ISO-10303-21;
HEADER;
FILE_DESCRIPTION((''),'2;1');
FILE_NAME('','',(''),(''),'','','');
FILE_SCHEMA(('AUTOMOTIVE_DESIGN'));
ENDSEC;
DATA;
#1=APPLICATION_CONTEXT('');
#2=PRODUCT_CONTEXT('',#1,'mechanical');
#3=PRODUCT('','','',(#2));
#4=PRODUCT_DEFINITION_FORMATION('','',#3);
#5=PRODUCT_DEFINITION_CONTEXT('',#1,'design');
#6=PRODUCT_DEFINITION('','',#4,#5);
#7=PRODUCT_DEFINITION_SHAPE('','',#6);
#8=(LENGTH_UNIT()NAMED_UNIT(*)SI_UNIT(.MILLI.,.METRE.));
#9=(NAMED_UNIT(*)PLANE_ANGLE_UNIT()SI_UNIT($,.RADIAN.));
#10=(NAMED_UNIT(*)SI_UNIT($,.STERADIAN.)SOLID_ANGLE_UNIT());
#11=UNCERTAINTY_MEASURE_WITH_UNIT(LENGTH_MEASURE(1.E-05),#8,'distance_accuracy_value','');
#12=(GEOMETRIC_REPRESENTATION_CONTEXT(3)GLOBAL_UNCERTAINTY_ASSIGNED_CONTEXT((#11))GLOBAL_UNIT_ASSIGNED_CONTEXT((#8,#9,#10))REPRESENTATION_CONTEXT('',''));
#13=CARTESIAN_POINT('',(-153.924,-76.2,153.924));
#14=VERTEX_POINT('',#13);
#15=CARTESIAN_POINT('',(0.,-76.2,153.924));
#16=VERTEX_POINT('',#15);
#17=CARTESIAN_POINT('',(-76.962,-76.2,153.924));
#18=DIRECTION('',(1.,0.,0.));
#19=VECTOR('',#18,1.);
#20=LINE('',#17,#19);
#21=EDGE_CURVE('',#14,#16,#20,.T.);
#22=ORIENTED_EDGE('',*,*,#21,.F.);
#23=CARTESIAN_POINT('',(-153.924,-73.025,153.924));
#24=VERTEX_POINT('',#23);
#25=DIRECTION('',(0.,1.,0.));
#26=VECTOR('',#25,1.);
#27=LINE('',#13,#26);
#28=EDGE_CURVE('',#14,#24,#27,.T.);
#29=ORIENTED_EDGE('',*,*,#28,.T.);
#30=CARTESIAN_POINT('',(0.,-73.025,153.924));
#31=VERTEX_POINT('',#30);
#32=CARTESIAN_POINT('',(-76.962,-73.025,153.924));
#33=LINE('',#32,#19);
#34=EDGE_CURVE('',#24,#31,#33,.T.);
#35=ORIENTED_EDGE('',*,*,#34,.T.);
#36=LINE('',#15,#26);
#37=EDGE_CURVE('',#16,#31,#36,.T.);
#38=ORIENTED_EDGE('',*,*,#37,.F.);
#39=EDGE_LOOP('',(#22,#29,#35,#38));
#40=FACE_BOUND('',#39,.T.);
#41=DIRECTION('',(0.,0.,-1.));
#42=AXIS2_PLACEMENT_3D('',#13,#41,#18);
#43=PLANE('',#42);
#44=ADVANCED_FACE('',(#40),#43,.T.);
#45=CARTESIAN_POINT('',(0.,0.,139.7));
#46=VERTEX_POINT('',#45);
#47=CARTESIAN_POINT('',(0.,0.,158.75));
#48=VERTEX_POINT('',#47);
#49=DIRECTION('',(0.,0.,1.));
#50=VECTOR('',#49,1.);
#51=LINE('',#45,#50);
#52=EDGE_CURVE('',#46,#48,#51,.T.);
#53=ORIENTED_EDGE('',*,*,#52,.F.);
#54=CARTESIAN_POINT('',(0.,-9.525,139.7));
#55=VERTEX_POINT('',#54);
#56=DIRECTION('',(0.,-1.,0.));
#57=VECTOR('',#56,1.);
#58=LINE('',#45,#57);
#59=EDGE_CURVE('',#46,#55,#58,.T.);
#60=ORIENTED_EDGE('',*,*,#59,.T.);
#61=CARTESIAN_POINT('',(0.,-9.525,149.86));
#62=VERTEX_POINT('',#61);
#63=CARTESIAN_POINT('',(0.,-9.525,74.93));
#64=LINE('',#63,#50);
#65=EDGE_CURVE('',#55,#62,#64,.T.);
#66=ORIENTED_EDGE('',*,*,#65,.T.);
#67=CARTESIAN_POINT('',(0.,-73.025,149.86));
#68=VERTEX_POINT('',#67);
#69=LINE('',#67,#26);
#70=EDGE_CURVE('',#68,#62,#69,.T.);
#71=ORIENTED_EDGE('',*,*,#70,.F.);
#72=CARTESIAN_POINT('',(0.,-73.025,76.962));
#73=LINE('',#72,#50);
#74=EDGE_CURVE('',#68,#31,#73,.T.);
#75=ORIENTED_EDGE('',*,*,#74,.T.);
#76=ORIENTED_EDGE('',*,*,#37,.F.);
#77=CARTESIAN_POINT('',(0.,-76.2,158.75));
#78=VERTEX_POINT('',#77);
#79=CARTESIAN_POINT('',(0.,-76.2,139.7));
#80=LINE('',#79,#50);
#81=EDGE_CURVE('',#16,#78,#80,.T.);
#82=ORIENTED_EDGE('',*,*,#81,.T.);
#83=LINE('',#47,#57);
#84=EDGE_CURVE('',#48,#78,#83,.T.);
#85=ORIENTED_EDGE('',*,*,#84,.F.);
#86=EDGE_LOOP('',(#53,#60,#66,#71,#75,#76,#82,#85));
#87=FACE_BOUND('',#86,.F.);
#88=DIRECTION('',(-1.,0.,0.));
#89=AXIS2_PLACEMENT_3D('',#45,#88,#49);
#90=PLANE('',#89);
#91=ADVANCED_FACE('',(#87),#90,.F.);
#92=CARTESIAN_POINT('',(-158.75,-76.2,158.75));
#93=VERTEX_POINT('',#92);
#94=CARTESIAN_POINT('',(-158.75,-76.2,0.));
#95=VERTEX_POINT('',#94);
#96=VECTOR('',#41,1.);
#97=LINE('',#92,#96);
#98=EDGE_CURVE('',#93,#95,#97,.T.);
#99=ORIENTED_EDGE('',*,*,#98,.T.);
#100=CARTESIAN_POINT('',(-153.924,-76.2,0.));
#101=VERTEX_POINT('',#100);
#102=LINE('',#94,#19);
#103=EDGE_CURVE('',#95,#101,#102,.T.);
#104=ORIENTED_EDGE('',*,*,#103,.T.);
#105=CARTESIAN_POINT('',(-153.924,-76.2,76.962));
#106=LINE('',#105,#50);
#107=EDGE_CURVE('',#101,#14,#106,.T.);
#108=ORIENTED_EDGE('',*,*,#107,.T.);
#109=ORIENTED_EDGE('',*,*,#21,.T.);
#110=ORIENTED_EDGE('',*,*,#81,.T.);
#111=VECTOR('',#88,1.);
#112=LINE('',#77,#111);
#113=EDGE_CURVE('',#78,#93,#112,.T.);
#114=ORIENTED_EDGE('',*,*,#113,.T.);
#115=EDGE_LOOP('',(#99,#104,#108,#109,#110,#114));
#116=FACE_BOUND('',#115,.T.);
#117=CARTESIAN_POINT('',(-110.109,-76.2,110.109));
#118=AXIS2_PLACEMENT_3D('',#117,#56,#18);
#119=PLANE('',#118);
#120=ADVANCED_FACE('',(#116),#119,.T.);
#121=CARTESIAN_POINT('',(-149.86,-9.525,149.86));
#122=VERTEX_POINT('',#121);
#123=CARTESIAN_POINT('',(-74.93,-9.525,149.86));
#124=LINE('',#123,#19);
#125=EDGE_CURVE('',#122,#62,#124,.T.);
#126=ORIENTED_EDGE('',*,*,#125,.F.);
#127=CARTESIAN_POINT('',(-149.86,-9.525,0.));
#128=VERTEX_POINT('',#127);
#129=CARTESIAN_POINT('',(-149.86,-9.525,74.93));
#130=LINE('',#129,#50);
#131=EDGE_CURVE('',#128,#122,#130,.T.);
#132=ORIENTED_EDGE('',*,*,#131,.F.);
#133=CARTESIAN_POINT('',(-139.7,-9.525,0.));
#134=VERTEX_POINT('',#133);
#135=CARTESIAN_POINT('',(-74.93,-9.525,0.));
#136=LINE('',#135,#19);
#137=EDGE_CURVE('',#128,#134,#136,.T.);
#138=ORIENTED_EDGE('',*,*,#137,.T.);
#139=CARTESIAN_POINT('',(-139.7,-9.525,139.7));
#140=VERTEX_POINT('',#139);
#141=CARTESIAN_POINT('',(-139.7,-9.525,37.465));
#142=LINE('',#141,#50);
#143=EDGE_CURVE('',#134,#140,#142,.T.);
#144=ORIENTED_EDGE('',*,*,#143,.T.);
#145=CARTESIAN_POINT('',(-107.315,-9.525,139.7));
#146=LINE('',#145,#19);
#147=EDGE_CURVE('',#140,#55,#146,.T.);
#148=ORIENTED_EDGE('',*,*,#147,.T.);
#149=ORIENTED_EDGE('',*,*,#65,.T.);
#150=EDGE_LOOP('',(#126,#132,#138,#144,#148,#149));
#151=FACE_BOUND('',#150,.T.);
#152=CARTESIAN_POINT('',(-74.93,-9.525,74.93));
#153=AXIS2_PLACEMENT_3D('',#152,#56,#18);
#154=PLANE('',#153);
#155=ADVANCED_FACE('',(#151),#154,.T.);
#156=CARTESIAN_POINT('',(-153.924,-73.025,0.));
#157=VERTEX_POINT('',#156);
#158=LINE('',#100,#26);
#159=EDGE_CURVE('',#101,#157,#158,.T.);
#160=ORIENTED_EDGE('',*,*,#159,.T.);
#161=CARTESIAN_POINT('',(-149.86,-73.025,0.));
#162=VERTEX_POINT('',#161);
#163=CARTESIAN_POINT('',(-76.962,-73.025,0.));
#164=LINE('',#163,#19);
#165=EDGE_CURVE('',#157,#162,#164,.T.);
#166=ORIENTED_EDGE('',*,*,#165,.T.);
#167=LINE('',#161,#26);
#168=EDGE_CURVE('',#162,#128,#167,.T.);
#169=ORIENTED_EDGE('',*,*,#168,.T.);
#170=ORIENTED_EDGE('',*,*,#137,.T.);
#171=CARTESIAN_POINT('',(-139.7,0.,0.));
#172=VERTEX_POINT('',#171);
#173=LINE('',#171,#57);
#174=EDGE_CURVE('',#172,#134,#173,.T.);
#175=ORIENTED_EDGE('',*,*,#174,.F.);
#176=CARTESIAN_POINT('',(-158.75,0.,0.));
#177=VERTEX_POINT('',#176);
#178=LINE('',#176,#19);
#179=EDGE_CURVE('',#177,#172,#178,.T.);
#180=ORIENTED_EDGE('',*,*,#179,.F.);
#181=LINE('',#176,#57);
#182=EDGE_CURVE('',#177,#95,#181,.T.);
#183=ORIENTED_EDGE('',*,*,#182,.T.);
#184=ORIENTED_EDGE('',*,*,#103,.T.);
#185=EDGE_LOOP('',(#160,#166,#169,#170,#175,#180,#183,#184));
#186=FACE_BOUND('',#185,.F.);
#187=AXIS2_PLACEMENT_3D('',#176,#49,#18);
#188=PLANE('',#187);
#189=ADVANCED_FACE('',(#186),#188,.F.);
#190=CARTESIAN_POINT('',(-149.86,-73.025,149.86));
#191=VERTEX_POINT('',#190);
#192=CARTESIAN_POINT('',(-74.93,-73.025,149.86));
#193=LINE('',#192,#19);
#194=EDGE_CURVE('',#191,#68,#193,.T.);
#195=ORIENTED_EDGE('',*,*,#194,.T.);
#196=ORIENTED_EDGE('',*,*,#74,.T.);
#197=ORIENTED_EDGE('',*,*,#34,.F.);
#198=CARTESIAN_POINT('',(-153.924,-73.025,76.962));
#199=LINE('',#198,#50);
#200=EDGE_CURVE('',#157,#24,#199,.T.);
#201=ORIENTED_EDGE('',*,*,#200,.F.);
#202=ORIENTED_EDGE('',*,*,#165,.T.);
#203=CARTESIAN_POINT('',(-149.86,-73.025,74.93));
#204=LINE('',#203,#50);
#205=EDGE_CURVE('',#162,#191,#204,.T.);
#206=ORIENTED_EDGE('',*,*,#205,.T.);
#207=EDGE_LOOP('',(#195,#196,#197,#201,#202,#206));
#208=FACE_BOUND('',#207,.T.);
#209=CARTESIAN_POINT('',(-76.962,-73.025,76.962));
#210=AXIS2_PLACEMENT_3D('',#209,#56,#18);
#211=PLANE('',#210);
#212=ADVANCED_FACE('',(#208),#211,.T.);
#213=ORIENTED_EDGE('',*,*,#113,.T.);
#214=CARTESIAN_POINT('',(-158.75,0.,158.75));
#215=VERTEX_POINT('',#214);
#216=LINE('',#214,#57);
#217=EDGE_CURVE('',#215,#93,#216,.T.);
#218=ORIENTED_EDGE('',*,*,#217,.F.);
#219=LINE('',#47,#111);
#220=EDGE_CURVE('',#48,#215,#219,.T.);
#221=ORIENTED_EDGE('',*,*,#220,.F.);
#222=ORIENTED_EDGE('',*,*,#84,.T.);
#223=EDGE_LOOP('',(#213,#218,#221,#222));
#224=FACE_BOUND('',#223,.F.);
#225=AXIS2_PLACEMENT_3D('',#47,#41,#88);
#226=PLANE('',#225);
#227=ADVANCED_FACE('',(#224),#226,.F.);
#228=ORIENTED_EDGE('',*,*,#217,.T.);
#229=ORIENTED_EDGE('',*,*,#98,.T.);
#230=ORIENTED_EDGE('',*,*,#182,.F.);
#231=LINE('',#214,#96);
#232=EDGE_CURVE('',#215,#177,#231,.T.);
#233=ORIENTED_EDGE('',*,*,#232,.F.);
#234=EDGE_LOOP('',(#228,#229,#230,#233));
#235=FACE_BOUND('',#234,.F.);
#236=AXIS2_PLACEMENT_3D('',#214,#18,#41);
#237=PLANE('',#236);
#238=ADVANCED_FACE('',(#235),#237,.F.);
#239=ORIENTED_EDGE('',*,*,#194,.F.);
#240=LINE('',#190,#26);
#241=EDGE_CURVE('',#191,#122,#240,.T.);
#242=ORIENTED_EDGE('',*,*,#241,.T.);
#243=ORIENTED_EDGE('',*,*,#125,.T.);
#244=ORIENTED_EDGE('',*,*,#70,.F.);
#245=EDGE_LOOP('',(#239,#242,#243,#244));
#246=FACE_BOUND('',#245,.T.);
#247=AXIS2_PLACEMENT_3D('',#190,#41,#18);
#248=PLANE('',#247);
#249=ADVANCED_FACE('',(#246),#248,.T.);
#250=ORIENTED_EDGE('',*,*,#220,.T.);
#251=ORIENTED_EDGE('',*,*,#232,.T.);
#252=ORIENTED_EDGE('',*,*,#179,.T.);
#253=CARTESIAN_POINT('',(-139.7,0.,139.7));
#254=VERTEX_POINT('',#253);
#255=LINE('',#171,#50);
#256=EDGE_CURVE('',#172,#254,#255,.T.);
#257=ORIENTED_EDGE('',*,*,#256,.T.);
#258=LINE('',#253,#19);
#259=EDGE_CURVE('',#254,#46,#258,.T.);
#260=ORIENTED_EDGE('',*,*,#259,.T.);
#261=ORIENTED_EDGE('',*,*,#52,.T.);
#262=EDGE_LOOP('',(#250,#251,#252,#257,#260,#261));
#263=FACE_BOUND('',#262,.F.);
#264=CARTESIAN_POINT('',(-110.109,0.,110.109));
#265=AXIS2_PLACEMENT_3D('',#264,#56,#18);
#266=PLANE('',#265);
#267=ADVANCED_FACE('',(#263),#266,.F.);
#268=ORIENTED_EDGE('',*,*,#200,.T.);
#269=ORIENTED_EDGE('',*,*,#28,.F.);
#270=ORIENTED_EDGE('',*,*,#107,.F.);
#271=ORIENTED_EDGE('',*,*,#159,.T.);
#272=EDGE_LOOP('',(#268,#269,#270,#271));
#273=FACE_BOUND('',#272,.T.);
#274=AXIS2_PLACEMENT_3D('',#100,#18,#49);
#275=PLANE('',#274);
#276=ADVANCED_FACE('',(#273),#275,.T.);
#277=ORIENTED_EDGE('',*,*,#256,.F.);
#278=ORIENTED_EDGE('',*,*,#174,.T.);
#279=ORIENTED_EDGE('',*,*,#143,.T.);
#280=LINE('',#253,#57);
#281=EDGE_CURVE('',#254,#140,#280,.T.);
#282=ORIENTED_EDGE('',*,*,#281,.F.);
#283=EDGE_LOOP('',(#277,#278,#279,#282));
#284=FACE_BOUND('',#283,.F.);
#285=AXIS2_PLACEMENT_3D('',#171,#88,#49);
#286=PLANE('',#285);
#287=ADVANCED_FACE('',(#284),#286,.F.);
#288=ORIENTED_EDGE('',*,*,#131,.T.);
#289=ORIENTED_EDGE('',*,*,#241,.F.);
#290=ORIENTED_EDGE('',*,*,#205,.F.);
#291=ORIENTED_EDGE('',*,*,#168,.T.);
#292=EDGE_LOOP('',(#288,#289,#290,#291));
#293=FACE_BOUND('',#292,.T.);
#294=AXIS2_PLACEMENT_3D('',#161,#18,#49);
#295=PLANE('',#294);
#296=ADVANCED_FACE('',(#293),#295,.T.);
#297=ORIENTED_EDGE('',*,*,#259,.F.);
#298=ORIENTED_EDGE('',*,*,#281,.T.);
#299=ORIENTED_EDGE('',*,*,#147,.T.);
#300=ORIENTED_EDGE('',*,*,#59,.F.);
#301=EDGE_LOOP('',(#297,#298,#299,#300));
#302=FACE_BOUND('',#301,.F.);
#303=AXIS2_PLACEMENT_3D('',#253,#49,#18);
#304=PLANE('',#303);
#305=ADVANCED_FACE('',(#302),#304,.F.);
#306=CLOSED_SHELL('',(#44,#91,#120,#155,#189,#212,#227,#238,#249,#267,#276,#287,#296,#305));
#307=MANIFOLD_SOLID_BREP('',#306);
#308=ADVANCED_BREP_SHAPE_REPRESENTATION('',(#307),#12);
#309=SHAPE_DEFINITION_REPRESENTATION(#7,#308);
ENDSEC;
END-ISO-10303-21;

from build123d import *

# Parameters (mm, degrees)
F1_DEPTH = 76.2
F2_W     = 153.924
F2_H     = 153.924
F3_DEPTH = 3.175
F4_W     = 149.86
F4_H     = 149.86
F5_DEPTH = 63.5


# Not quite as in the source:
# - a feature names something its author has since deleted; it is built from what else it names


with BuildPart() as f1:
    # F0 (on Front) → F1 (new body)
    with BuildSketch(Plane.XZ):
        Polygon((0, 139.7), (0, 158.75), (-158.75, 158.75), (-158.75, 0), (-139.7, 0), (-139.7, 139.7), align=None)
    extrude(amount=F1_DEPTH)

    # F2 (on face) → F3 (cut)
    with BuildSketch(Plane.XZ.offset(76.2)):
        with Locations((-76.962, 76.962)):
            Rectangle(F2_W, F2_H)
    extrude(amount=-F3_DEPTH, mode=Mode.SUBTRACT)

    # F4 (on face) → F5 (cut)
    with BuildSketch(Plane.XZ.offset(73.025)):
        with Locations((-74.93, 74.93)):
            Rectangle(F4_W, F4_H)
    extrude(amount=-F5_DEPTH, mode=Mode.SUBTRACT)


solid = f1.part
